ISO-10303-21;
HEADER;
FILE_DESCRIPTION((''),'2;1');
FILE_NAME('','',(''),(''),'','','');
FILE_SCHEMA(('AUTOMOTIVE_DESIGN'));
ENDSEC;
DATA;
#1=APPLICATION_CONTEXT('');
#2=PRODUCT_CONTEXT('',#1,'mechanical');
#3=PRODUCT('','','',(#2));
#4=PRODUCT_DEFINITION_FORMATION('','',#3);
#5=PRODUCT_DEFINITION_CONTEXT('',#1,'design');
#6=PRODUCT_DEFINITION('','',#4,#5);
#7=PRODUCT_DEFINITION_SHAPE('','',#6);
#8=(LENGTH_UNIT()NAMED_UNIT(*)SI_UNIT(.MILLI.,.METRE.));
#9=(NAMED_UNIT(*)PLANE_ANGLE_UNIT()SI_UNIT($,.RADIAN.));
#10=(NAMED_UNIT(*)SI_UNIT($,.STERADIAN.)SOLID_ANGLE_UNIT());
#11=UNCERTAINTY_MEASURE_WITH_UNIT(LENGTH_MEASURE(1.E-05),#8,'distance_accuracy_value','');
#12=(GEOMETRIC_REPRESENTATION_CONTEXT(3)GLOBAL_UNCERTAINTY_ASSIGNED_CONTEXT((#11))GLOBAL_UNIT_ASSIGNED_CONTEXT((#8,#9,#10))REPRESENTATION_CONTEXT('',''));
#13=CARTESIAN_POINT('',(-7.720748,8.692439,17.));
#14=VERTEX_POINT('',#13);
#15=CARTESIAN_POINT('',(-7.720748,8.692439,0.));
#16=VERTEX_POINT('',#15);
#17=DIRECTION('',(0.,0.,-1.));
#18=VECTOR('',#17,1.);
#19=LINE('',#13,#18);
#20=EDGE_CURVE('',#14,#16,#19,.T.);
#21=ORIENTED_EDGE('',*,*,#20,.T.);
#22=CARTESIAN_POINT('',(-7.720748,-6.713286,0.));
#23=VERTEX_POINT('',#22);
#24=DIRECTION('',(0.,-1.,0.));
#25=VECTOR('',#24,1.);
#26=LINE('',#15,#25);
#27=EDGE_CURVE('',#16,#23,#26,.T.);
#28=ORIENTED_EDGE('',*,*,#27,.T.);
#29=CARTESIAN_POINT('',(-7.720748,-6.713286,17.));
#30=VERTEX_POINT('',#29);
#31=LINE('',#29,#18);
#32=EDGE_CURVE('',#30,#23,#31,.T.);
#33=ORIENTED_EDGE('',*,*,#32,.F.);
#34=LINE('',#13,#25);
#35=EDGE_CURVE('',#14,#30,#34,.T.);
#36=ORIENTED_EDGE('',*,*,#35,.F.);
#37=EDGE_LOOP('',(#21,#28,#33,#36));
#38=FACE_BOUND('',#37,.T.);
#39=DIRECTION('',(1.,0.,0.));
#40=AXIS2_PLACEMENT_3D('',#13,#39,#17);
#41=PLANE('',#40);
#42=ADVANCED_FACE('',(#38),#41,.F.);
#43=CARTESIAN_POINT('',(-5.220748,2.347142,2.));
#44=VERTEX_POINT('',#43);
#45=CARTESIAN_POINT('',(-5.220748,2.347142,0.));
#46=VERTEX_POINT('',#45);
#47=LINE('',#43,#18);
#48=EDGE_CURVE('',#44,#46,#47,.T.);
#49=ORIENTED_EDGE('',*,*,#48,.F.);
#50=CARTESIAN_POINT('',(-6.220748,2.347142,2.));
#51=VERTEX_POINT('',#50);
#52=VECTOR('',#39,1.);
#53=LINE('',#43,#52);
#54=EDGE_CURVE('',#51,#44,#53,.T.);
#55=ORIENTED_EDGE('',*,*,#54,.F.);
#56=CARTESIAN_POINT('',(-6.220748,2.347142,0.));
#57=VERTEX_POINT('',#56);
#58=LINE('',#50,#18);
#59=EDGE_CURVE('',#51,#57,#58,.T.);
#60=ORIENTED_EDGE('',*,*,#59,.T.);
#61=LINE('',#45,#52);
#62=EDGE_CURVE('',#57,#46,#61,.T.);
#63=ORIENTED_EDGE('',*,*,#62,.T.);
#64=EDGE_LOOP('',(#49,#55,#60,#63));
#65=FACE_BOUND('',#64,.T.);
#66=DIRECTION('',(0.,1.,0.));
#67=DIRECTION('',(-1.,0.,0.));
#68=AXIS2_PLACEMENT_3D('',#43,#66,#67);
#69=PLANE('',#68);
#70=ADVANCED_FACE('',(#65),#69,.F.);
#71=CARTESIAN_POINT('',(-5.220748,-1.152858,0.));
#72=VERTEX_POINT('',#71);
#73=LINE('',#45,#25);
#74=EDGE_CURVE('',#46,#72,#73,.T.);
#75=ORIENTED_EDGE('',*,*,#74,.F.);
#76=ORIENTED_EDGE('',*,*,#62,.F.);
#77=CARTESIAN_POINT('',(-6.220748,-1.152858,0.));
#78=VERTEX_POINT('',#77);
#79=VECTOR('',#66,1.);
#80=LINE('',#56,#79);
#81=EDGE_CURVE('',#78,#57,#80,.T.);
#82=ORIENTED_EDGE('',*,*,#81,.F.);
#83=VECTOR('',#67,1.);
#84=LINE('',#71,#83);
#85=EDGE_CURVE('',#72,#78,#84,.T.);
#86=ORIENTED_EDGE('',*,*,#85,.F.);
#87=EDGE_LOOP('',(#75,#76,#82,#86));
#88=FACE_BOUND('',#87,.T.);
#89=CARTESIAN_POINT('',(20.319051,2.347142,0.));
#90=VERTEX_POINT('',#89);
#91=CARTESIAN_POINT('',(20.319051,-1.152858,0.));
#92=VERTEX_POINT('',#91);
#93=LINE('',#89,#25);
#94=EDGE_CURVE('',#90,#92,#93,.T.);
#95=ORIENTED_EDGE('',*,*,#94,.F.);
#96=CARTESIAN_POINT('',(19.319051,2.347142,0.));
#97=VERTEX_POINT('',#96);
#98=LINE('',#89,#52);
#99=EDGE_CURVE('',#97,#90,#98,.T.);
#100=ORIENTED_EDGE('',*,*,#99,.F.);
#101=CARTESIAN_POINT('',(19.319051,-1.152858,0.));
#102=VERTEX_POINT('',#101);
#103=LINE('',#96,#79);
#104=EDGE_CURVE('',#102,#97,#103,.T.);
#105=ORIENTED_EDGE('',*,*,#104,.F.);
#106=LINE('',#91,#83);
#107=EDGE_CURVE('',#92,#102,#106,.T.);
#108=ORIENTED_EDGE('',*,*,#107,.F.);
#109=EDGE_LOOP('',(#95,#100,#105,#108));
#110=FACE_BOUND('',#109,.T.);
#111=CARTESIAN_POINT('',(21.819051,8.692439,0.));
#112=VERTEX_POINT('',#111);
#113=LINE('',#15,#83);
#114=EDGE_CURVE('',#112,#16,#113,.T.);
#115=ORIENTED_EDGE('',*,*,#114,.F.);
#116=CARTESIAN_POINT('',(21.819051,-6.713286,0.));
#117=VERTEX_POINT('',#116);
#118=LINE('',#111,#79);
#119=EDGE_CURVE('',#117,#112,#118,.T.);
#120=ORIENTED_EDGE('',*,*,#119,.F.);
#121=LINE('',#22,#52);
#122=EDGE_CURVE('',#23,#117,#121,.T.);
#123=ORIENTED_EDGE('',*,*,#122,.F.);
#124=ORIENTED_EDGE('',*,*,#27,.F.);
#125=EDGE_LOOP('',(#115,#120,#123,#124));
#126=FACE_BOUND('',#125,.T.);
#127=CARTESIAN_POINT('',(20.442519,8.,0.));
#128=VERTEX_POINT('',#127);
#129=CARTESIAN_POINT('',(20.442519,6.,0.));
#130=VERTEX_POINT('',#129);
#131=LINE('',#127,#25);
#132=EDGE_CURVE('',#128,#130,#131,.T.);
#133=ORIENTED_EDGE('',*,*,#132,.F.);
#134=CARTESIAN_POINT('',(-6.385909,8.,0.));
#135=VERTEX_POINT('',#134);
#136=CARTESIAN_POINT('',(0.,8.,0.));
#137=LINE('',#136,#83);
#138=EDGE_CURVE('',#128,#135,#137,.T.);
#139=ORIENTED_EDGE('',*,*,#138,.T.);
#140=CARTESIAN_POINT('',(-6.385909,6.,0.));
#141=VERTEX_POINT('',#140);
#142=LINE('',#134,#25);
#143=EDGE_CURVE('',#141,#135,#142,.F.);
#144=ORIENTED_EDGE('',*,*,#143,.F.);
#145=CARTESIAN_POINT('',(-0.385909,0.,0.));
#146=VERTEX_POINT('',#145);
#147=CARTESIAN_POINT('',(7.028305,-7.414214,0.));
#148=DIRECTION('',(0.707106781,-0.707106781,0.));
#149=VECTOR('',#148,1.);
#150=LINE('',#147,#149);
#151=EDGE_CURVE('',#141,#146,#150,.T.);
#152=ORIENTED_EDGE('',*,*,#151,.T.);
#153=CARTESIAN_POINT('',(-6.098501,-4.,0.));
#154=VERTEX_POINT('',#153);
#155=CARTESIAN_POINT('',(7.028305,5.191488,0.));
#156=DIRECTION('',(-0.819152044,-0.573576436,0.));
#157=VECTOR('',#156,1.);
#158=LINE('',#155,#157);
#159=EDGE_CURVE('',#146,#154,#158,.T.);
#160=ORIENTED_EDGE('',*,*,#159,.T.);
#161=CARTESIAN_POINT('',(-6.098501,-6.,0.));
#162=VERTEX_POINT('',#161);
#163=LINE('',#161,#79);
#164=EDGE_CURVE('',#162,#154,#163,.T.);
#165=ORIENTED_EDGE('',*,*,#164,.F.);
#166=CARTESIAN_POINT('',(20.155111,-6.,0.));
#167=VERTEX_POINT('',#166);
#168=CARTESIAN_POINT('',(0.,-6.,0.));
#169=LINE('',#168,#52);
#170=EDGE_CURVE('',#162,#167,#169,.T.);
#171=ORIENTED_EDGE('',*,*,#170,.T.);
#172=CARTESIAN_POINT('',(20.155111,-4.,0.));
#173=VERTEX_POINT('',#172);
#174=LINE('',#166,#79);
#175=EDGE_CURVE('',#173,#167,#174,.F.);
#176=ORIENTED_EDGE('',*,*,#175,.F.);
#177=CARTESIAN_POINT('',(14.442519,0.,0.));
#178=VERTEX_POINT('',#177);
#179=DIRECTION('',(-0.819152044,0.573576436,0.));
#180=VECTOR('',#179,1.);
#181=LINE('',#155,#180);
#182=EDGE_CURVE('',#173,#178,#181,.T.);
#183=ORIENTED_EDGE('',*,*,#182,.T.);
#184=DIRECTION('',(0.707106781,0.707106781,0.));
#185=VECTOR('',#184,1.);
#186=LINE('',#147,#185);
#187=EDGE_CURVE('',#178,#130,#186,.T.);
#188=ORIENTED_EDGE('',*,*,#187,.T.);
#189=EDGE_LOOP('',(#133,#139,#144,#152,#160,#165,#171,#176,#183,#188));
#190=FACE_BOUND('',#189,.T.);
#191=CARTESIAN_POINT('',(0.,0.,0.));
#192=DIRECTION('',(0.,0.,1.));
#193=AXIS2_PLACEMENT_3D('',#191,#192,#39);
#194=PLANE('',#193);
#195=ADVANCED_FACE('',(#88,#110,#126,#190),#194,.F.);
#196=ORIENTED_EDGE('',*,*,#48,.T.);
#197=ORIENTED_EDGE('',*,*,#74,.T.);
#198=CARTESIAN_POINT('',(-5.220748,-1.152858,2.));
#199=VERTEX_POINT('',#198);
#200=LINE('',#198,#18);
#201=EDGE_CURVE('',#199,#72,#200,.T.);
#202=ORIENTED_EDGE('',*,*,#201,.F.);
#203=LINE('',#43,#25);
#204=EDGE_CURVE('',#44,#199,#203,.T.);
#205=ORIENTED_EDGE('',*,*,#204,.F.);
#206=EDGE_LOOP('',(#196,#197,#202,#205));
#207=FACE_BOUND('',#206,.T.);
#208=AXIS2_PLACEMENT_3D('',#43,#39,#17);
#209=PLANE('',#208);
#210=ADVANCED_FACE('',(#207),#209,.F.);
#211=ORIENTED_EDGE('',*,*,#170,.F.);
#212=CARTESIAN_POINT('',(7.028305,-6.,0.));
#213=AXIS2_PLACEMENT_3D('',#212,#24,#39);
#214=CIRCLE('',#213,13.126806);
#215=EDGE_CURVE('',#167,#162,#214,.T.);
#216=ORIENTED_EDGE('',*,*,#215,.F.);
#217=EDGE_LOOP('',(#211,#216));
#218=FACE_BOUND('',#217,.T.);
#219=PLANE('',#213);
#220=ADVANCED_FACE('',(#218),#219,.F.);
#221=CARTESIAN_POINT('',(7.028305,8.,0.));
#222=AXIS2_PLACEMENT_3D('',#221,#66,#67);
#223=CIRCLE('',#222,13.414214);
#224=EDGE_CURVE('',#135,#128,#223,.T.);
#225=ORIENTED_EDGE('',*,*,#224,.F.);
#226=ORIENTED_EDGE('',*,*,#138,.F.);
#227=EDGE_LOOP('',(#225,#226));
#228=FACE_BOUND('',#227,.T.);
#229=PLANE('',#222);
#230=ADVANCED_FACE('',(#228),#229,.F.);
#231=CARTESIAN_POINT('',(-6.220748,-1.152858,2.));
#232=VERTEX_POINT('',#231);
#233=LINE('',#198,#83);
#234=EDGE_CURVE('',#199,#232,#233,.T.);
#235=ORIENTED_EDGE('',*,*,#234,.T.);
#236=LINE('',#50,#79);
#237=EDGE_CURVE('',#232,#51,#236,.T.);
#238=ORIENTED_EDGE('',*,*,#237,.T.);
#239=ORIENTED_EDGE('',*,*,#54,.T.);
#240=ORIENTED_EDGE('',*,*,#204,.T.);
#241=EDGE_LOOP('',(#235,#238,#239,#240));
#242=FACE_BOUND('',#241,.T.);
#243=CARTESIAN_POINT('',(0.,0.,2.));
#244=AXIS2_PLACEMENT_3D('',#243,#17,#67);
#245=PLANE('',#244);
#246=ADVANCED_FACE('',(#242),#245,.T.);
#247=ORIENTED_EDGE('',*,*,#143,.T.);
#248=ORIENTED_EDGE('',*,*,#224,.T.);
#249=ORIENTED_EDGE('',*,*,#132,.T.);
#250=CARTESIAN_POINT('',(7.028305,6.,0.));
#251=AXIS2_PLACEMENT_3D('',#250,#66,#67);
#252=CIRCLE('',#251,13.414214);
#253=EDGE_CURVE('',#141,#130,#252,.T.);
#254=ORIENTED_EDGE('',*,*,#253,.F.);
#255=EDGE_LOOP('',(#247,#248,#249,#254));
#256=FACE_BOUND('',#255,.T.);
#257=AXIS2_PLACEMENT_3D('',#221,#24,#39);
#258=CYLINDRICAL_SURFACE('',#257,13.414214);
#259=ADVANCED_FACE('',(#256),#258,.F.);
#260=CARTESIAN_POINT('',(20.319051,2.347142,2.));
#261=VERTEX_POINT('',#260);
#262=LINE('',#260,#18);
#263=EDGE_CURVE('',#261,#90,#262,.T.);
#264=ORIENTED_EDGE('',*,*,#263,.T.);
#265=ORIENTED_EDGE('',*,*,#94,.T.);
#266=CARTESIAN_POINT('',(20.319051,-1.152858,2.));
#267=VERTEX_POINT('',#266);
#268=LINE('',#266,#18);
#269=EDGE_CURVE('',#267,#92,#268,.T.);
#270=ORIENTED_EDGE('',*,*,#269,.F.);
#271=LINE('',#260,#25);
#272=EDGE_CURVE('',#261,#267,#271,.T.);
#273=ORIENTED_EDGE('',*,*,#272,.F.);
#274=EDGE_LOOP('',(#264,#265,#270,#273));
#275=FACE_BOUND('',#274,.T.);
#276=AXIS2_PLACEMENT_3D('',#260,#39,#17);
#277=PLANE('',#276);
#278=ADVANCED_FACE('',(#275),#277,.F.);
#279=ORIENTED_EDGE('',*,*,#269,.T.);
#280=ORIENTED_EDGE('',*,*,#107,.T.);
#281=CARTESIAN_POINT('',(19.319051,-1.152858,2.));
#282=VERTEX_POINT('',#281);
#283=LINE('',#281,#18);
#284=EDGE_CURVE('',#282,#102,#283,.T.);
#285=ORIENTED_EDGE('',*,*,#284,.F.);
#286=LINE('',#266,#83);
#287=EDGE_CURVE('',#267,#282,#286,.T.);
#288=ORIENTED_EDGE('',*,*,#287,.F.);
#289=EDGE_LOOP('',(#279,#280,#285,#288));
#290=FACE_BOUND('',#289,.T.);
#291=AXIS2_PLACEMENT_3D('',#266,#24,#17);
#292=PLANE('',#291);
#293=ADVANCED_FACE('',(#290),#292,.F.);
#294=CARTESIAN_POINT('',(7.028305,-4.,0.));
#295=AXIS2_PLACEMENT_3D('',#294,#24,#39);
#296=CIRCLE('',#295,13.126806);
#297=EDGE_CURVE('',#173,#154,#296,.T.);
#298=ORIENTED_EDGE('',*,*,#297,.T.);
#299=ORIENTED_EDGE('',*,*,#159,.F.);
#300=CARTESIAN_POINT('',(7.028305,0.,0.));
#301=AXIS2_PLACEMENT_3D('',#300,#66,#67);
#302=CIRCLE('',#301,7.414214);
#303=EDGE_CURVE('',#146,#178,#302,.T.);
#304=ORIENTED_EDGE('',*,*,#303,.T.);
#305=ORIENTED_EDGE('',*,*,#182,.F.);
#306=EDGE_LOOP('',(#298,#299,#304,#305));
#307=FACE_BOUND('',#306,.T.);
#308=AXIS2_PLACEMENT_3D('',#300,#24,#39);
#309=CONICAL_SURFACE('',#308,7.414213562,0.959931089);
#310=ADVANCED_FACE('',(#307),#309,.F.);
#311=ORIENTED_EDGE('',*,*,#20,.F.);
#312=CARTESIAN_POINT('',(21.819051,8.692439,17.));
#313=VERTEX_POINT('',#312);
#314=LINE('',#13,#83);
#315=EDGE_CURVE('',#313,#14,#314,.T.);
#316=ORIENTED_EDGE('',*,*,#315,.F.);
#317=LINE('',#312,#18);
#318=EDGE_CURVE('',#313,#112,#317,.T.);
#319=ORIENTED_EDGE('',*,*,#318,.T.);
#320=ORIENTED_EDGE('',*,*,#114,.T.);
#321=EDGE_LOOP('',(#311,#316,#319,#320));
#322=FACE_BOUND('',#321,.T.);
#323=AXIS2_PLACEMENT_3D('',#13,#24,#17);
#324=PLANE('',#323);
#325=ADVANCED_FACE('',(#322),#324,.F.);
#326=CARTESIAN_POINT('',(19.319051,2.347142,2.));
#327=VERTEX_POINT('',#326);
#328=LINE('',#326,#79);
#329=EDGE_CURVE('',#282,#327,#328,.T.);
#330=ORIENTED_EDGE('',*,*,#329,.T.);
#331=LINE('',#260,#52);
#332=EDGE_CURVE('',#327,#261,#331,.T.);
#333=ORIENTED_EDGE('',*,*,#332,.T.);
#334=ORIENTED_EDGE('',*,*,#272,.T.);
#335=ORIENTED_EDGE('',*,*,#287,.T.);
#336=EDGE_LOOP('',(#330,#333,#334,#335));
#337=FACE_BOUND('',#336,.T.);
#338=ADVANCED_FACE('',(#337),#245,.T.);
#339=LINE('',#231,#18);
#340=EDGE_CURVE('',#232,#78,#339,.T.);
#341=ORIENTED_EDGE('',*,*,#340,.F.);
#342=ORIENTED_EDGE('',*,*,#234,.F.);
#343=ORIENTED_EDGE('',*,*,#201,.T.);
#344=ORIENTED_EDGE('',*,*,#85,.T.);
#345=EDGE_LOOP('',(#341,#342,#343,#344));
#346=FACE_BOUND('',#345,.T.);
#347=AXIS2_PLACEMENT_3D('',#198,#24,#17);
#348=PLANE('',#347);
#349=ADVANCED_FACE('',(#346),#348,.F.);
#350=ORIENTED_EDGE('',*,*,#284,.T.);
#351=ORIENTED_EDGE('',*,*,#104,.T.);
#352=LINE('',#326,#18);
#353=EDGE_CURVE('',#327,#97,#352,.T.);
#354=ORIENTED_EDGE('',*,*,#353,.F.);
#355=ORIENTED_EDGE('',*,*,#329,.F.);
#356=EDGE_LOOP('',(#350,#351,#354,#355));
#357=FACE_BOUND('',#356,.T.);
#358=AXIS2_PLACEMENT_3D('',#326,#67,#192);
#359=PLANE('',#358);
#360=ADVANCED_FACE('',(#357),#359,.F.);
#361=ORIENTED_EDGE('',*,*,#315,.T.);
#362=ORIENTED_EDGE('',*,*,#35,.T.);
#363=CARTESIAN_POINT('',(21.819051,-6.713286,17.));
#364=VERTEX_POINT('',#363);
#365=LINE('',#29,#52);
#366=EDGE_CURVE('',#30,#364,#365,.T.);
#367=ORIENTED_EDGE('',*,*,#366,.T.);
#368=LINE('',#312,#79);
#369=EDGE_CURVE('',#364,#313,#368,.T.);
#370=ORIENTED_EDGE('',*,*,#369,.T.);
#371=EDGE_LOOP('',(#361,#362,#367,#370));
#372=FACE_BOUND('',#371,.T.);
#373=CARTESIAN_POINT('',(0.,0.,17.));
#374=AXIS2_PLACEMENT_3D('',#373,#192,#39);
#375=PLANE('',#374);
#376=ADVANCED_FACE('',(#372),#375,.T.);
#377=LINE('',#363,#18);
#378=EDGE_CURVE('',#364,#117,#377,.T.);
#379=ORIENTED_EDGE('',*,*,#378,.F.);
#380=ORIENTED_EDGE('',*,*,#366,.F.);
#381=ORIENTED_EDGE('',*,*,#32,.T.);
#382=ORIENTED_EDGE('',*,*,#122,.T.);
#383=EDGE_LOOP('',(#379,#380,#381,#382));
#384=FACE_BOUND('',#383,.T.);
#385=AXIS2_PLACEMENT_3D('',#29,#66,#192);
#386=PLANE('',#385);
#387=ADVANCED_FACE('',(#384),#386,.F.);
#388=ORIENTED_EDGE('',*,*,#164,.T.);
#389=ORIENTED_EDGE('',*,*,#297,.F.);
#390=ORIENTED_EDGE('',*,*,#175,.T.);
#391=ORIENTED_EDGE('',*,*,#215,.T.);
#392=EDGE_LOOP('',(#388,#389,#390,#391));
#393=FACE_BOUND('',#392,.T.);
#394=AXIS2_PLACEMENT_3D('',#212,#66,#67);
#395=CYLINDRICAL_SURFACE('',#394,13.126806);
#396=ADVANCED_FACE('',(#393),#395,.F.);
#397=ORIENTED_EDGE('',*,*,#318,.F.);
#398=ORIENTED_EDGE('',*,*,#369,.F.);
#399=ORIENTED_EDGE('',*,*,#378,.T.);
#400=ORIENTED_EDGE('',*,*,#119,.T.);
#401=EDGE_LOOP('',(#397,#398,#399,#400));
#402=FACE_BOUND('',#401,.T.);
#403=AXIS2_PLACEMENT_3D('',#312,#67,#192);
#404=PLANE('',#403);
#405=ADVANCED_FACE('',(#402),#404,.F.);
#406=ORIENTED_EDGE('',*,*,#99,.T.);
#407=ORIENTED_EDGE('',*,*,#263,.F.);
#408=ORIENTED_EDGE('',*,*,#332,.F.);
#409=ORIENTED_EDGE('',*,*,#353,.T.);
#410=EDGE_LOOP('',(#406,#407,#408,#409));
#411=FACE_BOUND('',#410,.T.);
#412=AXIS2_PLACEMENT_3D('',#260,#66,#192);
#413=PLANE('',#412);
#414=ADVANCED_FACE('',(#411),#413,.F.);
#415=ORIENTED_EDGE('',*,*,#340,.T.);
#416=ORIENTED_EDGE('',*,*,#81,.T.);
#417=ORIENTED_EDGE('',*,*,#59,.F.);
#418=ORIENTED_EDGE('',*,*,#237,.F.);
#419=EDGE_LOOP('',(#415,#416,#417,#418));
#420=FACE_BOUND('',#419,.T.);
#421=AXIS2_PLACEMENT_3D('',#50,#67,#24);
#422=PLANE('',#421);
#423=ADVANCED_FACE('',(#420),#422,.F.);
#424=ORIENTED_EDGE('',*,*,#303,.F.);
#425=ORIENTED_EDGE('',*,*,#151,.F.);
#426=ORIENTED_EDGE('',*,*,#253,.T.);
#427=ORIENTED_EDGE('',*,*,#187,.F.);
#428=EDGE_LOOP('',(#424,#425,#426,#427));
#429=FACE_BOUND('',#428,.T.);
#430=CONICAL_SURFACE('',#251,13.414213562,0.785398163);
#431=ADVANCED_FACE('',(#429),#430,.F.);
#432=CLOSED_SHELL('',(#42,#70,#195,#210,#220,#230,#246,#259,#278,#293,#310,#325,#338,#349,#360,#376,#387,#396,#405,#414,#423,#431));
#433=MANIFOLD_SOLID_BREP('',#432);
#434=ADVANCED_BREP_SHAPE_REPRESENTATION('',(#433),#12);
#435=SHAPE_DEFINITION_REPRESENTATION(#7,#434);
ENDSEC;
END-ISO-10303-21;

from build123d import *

# Parameters (mm, degrees)
SKETCH1_W           = 29.53979912
SKETCH1_H           = 15.405724453
BOSS_EXTRUDE1_DEPTH = 17
SKETCH3_W           = 1
SKETCH3_H           = 3.5
CUT_EXTRUDE2_DEPTH  = 2


# Read off the part's stored shape, not the designer's step: Cavity1
with BuildPart() as part:
    # Sketch1 → Boss-Extrude1 (new body)
    with BuildSketch(Plane.XY):
        with Locations((7.049151698, 0.989576641)):
            Rectangle(SKETCH1_W, SKETCH1_H)
    extrude(amount=BOSS_EXTRUDE1_DEPTH)

    # Cavity1 outline → Cavity1 (revolve, cut)
    with BuildSketch(Plane(origin=(7.02830498, 0, 0), x_dir=(1, 0, 0), z_dir=(0, 0, 1))):
        Polygon((13.126805589, -4), (7.414213562, 0), (13.414213562, 6), (13.414213562, 8), (0, 8), (0, -6), (13.126805589, -6), align=None)
    revolve(axis=Axis((7.02830498, 0, 0), (0, 1, 0)), mode=Mode.SUBTRACT)

    # Sketch3 → Cut-Extrude2 (cut)
    with BuildSketch(Plane(origin=(0, 0, 0), x_dir=(-1, 0, 0), z_dir=(0, 0, -1))):
        with Locations((-19.819051258, 0.597141886)):
            Rectangle(SKETCH3_W, SKETCH3_H)
        with Locations((5.720747862, 0.597141886)):
            Rectangle(SKETCH3_W, SKETCH3_H)
    extrude(amount=-CUT_EXTRUDE2_DEPTH, mode=Mode.SUBTRACT)


solid = part.part
